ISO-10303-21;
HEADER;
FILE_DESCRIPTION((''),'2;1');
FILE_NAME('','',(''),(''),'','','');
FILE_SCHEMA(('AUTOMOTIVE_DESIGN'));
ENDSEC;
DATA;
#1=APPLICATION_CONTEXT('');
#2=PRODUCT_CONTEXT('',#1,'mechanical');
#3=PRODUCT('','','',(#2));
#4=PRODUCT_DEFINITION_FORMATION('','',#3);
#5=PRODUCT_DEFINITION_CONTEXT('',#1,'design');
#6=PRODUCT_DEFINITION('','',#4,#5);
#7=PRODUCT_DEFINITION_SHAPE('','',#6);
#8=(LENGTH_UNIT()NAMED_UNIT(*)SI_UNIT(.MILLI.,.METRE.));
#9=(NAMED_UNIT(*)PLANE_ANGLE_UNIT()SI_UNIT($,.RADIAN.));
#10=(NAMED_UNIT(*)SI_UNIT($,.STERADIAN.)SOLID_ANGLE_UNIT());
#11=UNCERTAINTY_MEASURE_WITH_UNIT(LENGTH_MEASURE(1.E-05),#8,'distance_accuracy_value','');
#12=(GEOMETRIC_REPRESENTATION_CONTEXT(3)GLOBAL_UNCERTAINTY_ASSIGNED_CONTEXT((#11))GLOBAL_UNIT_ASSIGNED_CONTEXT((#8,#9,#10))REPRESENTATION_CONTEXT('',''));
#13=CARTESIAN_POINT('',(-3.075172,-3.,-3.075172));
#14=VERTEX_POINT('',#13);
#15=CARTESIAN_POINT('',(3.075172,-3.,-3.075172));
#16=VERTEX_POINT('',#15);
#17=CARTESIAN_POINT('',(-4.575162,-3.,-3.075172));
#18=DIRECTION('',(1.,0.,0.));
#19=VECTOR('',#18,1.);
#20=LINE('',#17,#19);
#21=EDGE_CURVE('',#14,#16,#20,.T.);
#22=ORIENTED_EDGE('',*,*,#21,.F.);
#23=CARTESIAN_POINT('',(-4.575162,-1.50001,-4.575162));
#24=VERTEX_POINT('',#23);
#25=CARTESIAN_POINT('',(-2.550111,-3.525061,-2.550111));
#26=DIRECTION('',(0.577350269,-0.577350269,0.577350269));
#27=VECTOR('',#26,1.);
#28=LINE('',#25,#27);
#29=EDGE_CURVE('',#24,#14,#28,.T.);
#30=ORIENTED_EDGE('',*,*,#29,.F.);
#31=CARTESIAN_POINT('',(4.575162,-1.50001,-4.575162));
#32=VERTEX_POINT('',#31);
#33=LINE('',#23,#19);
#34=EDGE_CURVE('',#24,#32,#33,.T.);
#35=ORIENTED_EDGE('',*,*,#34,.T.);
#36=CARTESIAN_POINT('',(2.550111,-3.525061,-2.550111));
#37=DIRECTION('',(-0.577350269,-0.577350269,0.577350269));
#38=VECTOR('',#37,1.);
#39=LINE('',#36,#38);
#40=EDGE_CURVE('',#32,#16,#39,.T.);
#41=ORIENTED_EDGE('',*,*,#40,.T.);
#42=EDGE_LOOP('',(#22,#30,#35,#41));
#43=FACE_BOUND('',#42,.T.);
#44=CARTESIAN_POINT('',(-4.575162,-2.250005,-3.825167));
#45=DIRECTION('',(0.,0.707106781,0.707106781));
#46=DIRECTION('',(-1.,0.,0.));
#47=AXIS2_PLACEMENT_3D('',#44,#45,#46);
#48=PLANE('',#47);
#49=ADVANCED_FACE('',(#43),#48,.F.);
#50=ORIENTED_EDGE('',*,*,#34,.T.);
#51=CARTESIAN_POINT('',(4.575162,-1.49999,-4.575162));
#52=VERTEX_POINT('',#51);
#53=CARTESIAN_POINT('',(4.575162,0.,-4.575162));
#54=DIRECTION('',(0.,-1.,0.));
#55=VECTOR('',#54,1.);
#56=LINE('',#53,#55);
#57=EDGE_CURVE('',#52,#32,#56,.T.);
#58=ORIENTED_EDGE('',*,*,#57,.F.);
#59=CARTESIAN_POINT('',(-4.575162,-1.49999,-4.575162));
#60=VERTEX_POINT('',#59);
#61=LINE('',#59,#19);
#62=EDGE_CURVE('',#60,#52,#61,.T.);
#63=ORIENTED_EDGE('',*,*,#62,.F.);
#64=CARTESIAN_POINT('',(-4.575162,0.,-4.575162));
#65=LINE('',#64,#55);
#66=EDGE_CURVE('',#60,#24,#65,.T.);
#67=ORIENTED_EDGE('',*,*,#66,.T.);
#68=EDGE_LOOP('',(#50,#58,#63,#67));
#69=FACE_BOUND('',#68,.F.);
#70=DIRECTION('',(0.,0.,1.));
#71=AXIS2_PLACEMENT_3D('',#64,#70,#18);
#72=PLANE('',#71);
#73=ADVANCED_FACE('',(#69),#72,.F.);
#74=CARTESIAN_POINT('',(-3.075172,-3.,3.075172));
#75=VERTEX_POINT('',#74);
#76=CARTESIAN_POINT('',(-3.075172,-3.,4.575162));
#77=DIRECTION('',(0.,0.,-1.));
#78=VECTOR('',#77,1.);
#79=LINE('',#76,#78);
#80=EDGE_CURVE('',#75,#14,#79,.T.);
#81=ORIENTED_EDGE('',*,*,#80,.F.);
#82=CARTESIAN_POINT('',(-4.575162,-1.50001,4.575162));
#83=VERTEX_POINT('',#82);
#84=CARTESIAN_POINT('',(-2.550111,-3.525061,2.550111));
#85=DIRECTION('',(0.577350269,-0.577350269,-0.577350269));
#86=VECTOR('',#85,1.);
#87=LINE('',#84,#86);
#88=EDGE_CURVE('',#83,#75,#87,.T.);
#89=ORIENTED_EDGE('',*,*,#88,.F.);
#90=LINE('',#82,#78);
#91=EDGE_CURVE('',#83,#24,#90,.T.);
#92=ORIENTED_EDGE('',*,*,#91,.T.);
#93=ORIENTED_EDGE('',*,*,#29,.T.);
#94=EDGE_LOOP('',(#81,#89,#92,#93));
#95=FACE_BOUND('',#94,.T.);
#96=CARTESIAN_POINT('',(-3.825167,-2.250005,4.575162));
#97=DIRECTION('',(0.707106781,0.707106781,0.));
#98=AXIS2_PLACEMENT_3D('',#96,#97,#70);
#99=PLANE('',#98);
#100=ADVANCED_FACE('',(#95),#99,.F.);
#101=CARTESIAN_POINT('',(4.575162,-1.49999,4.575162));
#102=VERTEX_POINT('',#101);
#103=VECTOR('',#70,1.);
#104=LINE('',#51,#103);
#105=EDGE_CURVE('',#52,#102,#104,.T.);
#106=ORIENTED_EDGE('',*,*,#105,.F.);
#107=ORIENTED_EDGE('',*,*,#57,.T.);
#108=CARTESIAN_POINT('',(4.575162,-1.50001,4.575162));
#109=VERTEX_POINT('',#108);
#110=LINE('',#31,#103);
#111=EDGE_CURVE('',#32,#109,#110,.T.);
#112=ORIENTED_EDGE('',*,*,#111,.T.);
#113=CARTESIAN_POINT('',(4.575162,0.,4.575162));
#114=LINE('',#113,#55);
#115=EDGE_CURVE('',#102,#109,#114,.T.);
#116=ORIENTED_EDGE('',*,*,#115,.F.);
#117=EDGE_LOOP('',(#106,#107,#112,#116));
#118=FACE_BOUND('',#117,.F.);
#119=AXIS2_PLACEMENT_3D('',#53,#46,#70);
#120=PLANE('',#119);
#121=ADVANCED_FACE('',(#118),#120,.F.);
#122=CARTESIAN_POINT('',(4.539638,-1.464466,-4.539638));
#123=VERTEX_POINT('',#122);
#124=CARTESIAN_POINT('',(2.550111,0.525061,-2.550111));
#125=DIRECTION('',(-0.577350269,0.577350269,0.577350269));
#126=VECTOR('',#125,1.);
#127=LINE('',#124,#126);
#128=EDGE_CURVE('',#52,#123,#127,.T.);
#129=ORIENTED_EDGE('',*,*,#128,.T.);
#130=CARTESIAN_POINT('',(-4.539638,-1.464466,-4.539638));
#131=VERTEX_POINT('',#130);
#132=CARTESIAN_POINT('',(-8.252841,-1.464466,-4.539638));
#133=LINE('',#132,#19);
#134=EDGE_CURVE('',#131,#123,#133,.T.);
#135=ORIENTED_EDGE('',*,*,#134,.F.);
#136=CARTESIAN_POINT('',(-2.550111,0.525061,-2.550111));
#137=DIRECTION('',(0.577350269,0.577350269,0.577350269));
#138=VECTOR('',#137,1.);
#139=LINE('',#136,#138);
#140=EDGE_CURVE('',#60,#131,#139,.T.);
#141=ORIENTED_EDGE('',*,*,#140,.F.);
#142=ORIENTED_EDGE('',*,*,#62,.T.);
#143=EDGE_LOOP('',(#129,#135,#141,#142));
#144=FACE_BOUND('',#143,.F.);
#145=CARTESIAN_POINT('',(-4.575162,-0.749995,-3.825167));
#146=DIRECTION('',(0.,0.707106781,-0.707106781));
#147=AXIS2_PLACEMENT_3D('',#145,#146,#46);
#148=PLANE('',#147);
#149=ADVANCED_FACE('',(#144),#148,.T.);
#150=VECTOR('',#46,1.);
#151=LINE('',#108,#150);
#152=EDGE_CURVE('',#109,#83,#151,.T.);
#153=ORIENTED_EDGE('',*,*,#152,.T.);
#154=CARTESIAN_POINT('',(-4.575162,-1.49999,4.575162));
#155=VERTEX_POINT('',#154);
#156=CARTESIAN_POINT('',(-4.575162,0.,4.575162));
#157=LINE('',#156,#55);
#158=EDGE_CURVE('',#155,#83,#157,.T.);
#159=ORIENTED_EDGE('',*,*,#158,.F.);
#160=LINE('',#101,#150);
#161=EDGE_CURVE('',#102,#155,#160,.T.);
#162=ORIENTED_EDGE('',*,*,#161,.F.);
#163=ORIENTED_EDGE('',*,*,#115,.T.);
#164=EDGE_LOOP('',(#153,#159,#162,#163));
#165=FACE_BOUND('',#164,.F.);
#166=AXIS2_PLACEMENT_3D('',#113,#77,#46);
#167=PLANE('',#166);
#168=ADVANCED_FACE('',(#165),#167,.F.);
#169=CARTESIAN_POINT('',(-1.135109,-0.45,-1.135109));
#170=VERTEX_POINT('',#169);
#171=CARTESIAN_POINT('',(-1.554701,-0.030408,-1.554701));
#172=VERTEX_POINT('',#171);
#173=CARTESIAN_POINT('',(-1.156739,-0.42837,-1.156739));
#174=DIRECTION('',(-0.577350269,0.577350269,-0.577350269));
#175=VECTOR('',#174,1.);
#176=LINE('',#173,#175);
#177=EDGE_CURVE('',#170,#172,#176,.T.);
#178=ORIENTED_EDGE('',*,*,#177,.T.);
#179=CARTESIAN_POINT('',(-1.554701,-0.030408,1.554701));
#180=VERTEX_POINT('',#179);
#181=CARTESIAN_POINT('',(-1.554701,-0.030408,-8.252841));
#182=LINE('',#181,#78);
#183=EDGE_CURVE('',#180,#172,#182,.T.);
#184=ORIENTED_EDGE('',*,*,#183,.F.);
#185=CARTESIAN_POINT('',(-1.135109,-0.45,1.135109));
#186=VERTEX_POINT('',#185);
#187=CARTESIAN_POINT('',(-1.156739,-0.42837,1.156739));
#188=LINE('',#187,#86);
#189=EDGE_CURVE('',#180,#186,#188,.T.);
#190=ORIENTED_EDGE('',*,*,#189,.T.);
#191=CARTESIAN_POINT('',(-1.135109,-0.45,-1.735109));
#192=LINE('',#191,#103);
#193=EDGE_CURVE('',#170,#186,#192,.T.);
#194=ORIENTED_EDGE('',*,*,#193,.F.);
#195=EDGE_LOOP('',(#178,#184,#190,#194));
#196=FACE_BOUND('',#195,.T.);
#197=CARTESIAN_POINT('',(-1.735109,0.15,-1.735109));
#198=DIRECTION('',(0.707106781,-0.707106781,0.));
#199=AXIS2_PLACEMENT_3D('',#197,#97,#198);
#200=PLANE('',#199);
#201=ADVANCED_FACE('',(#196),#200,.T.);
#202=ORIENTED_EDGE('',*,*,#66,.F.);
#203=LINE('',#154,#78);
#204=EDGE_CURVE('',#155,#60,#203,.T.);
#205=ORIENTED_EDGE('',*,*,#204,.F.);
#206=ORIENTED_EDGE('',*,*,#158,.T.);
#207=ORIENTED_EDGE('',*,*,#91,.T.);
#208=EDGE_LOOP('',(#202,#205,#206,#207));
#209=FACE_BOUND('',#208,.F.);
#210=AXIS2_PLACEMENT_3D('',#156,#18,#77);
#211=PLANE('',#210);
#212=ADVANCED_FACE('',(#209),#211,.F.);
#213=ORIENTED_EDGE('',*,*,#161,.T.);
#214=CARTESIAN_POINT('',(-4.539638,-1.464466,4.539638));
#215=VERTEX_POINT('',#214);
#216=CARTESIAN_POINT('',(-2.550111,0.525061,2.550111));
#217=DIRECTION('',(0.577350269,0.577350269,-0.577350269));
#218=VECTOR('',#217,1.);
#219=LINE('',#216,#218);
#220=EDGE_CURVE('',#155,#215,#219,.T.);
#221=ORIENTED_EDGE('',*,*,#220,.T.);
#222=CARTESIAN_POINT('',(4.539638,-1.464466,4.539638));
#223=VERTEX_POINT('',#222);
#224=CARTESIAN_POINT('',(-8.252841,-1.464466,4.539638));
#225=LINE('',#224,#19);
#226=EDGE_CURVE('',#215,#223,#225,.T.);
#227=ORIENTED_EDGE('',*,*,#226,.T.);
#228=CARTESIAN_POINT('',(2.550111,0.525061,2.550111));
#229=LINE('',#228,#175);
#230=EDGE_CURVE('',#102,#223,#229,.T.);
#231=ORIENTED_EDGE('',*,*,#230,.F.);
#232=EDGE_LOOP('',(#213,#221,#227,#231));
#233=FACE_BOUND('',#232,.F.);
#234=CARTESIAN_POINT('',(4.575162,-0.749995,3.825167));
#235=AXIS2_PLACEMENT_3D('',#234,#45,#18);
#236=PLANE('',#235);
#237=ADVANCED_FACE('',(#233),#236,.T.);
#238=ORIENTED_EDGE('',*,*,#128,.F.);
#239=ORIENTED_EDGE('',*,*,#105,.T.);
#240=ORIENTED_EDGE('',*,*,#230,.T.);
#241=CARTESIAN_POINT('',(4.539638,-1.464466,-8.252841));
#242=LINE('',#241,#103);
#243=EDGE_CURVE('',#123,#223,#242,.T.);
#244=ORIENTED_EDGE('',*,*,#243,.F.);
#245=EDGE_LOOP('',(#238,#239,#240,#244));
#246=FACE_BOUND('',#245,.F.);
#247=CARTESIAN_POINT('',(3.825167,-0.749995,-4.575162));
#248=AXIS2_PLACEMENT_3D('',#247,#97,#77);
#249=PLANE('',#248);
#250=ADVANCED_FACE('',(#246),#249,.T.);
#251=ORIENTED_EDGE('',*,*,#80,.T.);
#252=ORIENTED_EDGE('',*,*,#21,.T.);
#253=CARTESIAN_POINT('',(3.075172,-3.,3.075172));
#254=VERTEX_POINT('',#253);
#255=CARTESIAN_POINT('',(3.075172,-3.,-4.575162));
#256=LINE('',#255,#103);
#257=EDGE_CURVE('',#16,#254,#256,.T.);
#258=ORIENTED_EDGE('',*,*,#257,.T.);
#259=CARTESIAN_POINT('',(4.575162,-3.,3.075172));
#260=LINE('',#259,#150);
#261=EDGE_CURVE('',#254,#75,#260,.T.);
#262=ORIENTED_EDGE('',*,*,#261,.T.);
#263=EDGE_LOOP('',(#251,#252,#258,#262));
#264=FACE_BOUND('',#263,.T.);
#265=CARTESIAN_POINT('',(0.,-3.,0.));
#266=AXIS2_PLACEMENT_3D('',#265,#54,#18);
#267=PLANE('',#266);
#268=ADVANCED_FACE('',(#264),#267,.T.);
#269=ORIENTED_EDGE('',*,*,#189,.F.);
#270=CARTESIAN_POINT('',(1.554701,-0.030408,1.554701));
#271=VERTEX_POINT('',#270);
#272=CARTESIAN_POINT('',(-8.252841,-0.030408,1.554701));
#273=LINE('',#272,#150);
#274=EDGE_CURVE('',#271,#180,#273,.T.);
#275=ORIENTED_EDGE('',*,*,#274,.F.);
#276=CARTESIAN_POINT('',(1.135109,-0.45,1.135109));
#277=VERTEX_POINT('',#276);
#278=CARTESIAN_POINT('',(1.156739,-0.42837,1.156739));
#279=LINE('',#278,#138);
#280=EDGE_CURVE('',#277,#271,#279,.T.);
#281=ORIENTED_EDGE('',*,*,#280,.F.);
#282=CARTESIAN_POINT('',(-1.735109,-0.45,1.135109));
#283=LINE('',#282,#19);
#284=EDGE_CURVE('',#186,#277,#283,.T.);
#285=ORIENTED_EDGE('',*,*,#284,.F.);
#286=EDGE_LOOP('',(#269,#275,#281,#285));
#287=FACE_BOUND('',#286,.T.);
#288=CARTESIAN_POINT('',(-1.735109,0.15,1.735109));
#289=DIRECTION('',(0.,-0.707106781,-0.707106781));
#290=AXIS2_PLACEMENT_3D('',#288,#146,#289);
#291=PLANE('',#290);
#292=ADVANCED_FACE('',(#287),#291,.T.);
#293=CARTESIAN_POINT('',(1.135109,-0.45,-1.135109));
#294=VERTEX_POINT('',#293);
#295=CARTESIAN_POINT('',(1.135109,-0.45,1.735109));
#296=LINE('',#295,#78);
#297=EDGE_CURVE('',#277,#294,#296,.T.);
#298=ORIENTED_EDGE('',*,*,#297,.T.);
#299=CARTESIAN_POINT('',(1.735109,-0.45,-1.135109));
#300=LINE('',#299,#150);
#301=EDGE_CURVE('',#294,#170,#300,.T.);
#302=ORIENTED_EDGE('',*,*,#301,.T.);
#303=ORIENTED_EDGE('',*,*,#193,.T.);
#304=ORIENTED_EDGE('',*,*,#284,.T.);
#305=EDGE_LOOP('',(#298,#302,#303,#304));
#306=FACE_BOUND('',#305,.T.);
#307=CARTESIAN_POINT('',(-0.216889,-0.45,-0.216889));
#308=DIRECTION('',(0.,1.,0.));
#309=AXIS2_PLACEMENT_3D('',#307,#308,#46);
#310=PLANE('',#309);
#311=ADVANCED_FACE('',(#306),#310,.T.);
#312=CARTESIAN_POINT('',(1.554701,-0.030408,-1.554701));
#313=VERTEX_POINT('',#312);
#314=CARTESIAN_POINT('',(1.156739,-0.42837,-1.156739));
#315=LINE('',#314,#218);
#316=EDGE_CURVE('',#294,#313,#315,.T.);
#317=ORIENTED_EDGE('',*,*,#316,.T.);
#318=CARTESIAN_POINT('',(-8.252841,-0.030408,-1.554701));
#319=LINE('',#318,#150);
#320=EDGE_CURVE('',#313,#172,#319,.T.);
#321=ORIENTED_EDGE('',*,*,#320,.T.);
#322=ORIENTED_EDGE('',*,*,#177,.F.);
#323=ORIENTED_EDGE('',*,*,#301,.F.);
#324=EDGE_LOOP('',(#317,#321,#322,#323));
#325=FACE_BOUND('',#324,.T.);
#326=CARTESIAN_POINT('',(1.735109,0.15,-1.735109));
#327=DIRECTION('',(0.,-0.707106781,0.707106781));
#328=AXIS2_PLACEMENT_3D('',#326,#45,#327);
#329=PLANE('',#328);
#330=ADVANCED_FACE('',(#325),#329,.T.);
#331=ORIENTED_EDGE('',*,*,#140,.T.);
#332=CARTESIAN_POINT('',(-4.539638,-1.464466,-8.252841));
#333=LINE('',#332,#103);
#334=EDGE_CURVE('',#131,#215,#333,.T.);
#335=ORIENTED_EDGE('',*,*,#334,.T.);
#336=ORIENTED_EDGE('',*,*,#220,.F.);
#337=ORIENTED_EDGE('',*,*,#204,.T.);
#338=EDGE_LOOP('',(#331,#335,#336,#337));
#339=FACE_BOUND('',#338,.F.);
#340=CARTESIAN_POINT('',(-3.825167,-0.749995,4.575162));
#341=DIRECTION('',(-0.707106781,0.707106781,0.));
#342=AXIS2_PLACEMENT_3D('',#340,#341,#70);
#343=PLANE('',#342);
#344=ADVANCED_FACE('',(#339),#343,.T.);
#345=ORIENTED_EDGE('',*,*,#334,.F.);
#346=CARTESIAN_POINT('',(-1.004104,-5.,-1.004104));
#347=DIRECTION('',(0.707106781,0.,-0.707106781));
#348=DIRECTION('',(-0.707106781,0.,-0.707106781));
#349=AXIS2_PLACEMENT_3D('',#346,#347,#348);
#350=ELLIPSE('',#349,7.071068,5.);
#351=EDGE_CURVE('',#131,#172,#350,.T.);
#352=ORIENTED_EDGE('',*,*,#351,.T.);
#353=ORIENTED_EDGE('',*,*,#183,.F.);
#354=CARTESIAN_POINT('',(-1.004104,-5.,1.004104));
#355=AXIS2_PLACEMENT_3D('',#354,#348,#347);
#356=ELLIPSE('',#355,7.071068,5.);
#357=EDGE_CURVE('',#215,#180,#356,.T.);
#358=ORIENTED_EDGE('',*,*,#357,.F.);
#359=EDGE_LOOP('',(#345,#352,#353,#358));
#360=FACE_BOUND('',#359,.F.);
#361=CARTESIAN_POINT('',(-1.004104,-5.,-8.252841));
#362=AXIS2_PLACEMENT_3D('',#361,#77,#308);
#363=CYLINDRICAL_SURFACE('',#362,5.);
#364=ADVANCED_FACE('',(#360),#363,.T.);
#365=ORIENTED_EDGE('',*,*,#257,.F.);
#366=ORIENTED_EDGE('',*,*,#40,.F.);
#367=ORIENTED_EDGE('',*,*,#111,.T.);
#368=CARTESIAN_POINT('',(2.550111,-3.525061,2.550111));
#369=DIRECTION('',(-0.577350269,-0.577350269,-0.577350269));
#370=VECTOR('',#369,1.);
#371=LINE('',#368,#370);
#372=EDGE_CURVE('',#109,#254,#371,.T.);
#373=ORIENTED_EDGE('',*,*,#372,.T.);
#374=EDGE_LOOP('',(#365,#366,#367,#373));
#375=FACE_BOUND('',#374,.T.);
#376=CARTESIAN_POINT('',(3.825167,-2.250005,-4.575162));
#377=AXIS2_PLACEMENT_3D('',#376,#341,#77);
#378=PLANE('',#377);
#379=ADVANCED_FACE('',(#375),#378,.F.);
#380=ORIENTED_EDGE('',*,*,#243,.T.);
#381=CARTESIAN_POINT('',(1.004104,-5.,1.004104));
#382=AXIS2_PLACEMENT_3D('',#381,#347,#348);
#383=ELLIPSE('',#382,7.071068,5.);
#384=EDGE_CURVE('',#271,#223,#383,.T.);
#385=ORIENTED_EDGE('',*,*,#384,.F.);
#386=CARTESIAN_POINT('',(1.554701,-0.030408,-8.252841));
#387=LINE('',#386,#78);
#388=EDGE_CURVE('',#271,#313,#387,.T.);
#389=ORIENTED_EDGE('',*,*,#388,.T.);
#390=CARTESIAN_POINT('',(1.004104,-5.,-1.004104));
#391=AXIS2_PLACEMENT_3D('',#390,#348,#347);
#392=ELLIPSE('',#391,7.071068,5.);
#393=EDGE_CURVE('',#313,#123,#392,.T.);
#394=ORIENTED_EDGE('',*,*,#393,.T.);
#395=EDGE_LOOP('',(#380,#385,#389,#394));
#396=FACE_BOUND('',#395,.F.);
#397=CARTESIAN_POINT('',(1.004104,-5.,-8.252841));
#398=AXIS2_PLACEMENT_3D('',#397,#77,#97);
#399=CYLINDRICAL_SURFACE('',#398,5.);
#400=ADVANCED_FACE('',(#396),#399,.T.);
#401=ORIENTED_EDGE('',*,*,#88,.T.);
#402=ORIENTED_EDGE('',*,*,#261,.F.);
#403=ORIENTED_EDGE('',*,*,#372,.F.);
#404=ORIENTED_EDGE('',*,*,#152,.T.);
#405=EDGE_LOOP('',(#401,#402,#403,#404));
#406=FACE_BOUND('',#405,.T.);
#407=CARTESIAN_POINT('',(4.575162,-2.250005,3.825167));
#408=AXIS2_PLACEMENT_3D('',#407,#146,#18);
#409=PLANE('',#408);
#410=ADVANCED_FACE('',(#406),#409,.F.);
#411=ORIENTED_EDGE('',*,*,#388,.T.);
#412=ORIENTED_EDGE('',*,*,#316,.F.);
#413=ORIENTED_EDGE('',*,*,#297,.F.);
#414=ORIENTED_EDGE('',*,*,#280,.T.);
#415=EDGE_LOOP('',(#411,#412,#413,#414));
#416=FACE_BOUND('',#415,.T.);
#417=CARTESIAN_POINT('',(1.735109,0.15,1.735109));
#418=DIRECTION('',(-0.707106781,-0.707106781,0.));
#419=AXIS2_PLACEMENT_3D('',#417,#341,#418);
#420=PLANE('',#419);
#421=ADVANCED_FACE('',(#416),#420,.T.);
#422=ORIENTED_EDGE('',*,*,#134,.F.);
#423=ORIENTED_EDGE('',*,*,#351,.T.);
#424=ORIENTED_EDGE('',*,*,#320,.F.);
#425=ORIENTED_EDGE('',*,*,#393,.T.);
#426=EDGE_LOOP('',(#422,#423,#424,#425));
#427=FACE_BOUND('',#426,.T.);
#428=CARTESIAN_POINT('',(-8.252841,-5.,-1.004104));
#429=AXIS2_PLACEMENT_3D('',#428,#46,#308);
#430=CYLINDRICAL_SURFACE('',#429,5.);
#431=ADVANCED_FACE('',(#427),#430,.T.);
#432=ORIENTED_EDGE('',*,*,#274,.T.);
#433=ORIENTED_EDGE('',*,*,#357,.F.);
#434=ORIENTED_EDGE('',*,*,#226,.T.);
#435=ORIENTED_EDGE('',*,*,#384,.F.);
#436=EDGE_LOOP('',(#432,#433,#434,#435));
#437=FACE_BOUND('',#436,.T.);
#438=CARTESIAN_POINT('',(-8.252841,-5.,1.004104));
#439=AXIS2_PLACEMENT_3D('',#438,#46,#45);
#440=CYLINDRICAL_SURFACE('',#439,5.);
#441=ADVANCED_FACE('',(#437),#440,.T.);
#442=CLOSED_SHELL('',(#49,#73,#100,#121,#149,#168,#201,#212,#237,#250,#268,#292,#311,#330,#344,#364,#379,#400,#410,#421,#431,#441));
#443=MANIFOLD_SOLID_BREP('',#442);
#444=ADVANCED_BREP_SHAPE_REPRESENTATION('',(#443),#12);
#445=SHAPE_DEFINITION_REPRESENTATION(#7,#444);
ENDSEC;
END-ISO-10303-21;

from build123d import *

# Parameters (mm, degrees)
F1_DEPTH     = 3
F2_SIZE2     = 1.49999
F2_SIZE      = 1.49999
F3_W         = 1.7351090792
F3_H         = 1.7351090792
F4_DEPTH     = 0.45
F5_T4_DEPTH  = 3.4702181583
F5_T9_DEPTH  = 3.4702181583
F5_T14_DEPTH = 3.4702181583
F5_T19_DEPTH = 3.4702181583
F6_T1_DEPTH  = 16.5056825173
F6_T3_DEPTH  = 16.5056825173


# Not quite as in the source:
# - a fillet or chamfer that OpenCascade refuses, or shapes differently, is made with other operations: its cross-section is extruded or revolved along the edge and cut away or added
# - a fillet or chamfer is up to 0.001 mm smaller than in the source, because OpenCascade refuses the exact size


with BuildPart() as f1:
    # F0 (on Front) → F1 (new body)
    with BuildSketch(Plane.XZ):
        Polygon((4.575161729, 4.575161729), (0, 4.575161729), (-4.575161729, 4.575161729), (-4.575161729, 0), (-4.575161729, -4.575161729), (0, -4.575161729), (4.575161729, -4.575161729), (4.575161729, 0), align=None)
    extrude(amount=F1_DEPTH)

    # F2 (size 1.5 and 1.5 in the source; OpenCascade refuses exactly that, so slightly less here)
    f2_edges = [f1.edges().sort_by_distance(p)[0] for p in [
        (0, -3, 4.575162),
        (-4.575162, -3, 0),
        (0, -3, -4.575162),
        (4.575162, -3, 0),
        (0, 0, 4.575162),
        (-4.575162, 0, 0),
        (0, 0, -4.575162),
        (4.575162, 0, 0),
    ]]
    chamfer(f2_edges, length=F2_SIZE, length2=F2_SIZE2)

    # F3 (on face) → F4 (cut)
    with BuildSketch(Plane(origin=(0, 0, 0), x_dir=(-1, 0, 0), z_dir=(0, 1, 0))):
        Polygon((0, 1.7351090792), (0, 0), (-1.7351090792, 0), (-1.7351090792, -1.7351090792), (0, -1.7351090792), (1.7351090792, -1.7351090792), (1.7351090792, 0), (1.7351090792, 1.7351090792), align=None)
        with Locations((-0.8675545396, 0.8675545396)):
            Rectangle(F3_W, F3_H)
    extrude(amount=-F4_DEPTH, mode=Mode.SUBTRACT)

    # F5: chamfer of 0.6 on 4 edges, made by hand


with BuildPart() as f5_tool2:
    # F5_s3 → F5_t4 (new body)
    with BuildSketch(Plane.YZ.offset(-1.7351090792)):
        Polygon((0.15, 1.7351090792), (-0.45, 1.1351090792), (-0.45, 1.7351090792), align=None)
    extrude(amount=F5_T4_DEPTH)

    split(bisect_by=Plane.XZ, keep=Keep.TOP)


with BuildPart() as f1_1:
    add(f1.part)

    # F5_t1: union F5_tool2
    add(f5_tool2.part)


with BuildPart() as f5_tool7:
    # F5_s8 → F5_t9 (new body)
    with BuildSketch(Plane.XY.offset(1.7351090792)):
        Polygon((1.7351090792, 0.15), (1.1351090792, -0.45), (1.7351090792, -0.45), align=None)
    extrude(amount=-F5_T9_DEPTH)

    split(bisect_by=Plane.XZ, keep=Keep.TOP)


with BuildPart() as f1_2:
    add(f1_1.part)

    # F5_t6: union F5_tool7
    add(f5_tool7.part)


with BuildPart() as f5_tool12:
    # F5_s13 → F5_t14 (new body)
    with BuildSketch(Plane.YZ.offset(1.7351090792)):
        Polygon((0.15, -1.7351090792), (-0.45, -1.1351090792), (-0.45, -1.7351090792), align=None)
    extrude(amount=-F5_T14_DEPTH)

    split(bisect_by=Plane.XZ, keep=Keep.TOP)


with BuildPart() as f1_3:
    add(f1_2.part)

    # F5_t11: union F5_tool12
    add(f5_tool12.part)


with BuildPart() as f5_tool17:
    # F5_s18 → F5_t19 (new body)
    with BuildSketch(Plane.XY.offset(-1.7351090792)):
        Polygon((-1.7351090792, 0.15), (-1.1351090792, -0.45), (-1.7351090792, -0.45), align=None)
    extrude(amount=F5_T19_DEPTH)

    split(bisect_by=Plane.XZ, keep=Keep.TOP)


with BuildPart() as f1_4:
    add(f1_3.part)

    # F5_t16: union F5_tool17
    add(f5_tool17.part)

    # F6: fillet of radius 5 on 4 edges, made by hand

    # F6_s2 → F6_t1 (cut)
    with BuildSketch(Plane.XY.offset(-8.2528412587)):
        with BuildLine():
            ThreePointArc((4.5396378231, -1.4644660941), (2.917521079, -0.3806023374), (1.0041039171, 0))
            Line((1.0041039171, 0), (3.075171729, 0))
            Line((3.075171729, 0), (4.5396378231, -1.4644660941))
        make_face()
        with BuildLine():
            ThreePointArc((-1.0041039171, 0), (-2.917521079, -0.3806023374), (-4.5396378231, -1.4644660941))
            Line((-4.5396378231, -1.4644660941), (-3.075171729, 0))
            Line((-3.075171729, 0), (-1.0041039171, 0))
        make_face()
    extrude(amount=F6_T1_DEPTH, mode=Mode.SUBTRACT)

    # F6_s4 → F6_t3 (cut)
    with BuildSketch(Plane.YZ.offset(-8.2528412587)):
        with BuildLine():
            ThreePointArc((-1.4644660941, 4.5396378231), (-0.3806023374, 2.917521079), (0, 1.0041039171))
            Line((0, 1.0041039171), (0, 3.075171729))
            Line((0, 3.075171729), (-1.4644660941, 4.5396378231))
        make_face()
        with BuildLine():
            ThreePointArc((0, -1.0041039171), (-0.3806023374, -2.917521079), (-1.4644660941, -4.5396378231))
            Line((-1.4644660941, -4.5396378231), (0, -3.075171729))
            Line((0, -3.075171729), (0, -1.0041039171))
        make_face()
    extrude(amount=F6_T3_DEPTH, mode=Mode.SUBTRACT)


solid = f1_4.part
